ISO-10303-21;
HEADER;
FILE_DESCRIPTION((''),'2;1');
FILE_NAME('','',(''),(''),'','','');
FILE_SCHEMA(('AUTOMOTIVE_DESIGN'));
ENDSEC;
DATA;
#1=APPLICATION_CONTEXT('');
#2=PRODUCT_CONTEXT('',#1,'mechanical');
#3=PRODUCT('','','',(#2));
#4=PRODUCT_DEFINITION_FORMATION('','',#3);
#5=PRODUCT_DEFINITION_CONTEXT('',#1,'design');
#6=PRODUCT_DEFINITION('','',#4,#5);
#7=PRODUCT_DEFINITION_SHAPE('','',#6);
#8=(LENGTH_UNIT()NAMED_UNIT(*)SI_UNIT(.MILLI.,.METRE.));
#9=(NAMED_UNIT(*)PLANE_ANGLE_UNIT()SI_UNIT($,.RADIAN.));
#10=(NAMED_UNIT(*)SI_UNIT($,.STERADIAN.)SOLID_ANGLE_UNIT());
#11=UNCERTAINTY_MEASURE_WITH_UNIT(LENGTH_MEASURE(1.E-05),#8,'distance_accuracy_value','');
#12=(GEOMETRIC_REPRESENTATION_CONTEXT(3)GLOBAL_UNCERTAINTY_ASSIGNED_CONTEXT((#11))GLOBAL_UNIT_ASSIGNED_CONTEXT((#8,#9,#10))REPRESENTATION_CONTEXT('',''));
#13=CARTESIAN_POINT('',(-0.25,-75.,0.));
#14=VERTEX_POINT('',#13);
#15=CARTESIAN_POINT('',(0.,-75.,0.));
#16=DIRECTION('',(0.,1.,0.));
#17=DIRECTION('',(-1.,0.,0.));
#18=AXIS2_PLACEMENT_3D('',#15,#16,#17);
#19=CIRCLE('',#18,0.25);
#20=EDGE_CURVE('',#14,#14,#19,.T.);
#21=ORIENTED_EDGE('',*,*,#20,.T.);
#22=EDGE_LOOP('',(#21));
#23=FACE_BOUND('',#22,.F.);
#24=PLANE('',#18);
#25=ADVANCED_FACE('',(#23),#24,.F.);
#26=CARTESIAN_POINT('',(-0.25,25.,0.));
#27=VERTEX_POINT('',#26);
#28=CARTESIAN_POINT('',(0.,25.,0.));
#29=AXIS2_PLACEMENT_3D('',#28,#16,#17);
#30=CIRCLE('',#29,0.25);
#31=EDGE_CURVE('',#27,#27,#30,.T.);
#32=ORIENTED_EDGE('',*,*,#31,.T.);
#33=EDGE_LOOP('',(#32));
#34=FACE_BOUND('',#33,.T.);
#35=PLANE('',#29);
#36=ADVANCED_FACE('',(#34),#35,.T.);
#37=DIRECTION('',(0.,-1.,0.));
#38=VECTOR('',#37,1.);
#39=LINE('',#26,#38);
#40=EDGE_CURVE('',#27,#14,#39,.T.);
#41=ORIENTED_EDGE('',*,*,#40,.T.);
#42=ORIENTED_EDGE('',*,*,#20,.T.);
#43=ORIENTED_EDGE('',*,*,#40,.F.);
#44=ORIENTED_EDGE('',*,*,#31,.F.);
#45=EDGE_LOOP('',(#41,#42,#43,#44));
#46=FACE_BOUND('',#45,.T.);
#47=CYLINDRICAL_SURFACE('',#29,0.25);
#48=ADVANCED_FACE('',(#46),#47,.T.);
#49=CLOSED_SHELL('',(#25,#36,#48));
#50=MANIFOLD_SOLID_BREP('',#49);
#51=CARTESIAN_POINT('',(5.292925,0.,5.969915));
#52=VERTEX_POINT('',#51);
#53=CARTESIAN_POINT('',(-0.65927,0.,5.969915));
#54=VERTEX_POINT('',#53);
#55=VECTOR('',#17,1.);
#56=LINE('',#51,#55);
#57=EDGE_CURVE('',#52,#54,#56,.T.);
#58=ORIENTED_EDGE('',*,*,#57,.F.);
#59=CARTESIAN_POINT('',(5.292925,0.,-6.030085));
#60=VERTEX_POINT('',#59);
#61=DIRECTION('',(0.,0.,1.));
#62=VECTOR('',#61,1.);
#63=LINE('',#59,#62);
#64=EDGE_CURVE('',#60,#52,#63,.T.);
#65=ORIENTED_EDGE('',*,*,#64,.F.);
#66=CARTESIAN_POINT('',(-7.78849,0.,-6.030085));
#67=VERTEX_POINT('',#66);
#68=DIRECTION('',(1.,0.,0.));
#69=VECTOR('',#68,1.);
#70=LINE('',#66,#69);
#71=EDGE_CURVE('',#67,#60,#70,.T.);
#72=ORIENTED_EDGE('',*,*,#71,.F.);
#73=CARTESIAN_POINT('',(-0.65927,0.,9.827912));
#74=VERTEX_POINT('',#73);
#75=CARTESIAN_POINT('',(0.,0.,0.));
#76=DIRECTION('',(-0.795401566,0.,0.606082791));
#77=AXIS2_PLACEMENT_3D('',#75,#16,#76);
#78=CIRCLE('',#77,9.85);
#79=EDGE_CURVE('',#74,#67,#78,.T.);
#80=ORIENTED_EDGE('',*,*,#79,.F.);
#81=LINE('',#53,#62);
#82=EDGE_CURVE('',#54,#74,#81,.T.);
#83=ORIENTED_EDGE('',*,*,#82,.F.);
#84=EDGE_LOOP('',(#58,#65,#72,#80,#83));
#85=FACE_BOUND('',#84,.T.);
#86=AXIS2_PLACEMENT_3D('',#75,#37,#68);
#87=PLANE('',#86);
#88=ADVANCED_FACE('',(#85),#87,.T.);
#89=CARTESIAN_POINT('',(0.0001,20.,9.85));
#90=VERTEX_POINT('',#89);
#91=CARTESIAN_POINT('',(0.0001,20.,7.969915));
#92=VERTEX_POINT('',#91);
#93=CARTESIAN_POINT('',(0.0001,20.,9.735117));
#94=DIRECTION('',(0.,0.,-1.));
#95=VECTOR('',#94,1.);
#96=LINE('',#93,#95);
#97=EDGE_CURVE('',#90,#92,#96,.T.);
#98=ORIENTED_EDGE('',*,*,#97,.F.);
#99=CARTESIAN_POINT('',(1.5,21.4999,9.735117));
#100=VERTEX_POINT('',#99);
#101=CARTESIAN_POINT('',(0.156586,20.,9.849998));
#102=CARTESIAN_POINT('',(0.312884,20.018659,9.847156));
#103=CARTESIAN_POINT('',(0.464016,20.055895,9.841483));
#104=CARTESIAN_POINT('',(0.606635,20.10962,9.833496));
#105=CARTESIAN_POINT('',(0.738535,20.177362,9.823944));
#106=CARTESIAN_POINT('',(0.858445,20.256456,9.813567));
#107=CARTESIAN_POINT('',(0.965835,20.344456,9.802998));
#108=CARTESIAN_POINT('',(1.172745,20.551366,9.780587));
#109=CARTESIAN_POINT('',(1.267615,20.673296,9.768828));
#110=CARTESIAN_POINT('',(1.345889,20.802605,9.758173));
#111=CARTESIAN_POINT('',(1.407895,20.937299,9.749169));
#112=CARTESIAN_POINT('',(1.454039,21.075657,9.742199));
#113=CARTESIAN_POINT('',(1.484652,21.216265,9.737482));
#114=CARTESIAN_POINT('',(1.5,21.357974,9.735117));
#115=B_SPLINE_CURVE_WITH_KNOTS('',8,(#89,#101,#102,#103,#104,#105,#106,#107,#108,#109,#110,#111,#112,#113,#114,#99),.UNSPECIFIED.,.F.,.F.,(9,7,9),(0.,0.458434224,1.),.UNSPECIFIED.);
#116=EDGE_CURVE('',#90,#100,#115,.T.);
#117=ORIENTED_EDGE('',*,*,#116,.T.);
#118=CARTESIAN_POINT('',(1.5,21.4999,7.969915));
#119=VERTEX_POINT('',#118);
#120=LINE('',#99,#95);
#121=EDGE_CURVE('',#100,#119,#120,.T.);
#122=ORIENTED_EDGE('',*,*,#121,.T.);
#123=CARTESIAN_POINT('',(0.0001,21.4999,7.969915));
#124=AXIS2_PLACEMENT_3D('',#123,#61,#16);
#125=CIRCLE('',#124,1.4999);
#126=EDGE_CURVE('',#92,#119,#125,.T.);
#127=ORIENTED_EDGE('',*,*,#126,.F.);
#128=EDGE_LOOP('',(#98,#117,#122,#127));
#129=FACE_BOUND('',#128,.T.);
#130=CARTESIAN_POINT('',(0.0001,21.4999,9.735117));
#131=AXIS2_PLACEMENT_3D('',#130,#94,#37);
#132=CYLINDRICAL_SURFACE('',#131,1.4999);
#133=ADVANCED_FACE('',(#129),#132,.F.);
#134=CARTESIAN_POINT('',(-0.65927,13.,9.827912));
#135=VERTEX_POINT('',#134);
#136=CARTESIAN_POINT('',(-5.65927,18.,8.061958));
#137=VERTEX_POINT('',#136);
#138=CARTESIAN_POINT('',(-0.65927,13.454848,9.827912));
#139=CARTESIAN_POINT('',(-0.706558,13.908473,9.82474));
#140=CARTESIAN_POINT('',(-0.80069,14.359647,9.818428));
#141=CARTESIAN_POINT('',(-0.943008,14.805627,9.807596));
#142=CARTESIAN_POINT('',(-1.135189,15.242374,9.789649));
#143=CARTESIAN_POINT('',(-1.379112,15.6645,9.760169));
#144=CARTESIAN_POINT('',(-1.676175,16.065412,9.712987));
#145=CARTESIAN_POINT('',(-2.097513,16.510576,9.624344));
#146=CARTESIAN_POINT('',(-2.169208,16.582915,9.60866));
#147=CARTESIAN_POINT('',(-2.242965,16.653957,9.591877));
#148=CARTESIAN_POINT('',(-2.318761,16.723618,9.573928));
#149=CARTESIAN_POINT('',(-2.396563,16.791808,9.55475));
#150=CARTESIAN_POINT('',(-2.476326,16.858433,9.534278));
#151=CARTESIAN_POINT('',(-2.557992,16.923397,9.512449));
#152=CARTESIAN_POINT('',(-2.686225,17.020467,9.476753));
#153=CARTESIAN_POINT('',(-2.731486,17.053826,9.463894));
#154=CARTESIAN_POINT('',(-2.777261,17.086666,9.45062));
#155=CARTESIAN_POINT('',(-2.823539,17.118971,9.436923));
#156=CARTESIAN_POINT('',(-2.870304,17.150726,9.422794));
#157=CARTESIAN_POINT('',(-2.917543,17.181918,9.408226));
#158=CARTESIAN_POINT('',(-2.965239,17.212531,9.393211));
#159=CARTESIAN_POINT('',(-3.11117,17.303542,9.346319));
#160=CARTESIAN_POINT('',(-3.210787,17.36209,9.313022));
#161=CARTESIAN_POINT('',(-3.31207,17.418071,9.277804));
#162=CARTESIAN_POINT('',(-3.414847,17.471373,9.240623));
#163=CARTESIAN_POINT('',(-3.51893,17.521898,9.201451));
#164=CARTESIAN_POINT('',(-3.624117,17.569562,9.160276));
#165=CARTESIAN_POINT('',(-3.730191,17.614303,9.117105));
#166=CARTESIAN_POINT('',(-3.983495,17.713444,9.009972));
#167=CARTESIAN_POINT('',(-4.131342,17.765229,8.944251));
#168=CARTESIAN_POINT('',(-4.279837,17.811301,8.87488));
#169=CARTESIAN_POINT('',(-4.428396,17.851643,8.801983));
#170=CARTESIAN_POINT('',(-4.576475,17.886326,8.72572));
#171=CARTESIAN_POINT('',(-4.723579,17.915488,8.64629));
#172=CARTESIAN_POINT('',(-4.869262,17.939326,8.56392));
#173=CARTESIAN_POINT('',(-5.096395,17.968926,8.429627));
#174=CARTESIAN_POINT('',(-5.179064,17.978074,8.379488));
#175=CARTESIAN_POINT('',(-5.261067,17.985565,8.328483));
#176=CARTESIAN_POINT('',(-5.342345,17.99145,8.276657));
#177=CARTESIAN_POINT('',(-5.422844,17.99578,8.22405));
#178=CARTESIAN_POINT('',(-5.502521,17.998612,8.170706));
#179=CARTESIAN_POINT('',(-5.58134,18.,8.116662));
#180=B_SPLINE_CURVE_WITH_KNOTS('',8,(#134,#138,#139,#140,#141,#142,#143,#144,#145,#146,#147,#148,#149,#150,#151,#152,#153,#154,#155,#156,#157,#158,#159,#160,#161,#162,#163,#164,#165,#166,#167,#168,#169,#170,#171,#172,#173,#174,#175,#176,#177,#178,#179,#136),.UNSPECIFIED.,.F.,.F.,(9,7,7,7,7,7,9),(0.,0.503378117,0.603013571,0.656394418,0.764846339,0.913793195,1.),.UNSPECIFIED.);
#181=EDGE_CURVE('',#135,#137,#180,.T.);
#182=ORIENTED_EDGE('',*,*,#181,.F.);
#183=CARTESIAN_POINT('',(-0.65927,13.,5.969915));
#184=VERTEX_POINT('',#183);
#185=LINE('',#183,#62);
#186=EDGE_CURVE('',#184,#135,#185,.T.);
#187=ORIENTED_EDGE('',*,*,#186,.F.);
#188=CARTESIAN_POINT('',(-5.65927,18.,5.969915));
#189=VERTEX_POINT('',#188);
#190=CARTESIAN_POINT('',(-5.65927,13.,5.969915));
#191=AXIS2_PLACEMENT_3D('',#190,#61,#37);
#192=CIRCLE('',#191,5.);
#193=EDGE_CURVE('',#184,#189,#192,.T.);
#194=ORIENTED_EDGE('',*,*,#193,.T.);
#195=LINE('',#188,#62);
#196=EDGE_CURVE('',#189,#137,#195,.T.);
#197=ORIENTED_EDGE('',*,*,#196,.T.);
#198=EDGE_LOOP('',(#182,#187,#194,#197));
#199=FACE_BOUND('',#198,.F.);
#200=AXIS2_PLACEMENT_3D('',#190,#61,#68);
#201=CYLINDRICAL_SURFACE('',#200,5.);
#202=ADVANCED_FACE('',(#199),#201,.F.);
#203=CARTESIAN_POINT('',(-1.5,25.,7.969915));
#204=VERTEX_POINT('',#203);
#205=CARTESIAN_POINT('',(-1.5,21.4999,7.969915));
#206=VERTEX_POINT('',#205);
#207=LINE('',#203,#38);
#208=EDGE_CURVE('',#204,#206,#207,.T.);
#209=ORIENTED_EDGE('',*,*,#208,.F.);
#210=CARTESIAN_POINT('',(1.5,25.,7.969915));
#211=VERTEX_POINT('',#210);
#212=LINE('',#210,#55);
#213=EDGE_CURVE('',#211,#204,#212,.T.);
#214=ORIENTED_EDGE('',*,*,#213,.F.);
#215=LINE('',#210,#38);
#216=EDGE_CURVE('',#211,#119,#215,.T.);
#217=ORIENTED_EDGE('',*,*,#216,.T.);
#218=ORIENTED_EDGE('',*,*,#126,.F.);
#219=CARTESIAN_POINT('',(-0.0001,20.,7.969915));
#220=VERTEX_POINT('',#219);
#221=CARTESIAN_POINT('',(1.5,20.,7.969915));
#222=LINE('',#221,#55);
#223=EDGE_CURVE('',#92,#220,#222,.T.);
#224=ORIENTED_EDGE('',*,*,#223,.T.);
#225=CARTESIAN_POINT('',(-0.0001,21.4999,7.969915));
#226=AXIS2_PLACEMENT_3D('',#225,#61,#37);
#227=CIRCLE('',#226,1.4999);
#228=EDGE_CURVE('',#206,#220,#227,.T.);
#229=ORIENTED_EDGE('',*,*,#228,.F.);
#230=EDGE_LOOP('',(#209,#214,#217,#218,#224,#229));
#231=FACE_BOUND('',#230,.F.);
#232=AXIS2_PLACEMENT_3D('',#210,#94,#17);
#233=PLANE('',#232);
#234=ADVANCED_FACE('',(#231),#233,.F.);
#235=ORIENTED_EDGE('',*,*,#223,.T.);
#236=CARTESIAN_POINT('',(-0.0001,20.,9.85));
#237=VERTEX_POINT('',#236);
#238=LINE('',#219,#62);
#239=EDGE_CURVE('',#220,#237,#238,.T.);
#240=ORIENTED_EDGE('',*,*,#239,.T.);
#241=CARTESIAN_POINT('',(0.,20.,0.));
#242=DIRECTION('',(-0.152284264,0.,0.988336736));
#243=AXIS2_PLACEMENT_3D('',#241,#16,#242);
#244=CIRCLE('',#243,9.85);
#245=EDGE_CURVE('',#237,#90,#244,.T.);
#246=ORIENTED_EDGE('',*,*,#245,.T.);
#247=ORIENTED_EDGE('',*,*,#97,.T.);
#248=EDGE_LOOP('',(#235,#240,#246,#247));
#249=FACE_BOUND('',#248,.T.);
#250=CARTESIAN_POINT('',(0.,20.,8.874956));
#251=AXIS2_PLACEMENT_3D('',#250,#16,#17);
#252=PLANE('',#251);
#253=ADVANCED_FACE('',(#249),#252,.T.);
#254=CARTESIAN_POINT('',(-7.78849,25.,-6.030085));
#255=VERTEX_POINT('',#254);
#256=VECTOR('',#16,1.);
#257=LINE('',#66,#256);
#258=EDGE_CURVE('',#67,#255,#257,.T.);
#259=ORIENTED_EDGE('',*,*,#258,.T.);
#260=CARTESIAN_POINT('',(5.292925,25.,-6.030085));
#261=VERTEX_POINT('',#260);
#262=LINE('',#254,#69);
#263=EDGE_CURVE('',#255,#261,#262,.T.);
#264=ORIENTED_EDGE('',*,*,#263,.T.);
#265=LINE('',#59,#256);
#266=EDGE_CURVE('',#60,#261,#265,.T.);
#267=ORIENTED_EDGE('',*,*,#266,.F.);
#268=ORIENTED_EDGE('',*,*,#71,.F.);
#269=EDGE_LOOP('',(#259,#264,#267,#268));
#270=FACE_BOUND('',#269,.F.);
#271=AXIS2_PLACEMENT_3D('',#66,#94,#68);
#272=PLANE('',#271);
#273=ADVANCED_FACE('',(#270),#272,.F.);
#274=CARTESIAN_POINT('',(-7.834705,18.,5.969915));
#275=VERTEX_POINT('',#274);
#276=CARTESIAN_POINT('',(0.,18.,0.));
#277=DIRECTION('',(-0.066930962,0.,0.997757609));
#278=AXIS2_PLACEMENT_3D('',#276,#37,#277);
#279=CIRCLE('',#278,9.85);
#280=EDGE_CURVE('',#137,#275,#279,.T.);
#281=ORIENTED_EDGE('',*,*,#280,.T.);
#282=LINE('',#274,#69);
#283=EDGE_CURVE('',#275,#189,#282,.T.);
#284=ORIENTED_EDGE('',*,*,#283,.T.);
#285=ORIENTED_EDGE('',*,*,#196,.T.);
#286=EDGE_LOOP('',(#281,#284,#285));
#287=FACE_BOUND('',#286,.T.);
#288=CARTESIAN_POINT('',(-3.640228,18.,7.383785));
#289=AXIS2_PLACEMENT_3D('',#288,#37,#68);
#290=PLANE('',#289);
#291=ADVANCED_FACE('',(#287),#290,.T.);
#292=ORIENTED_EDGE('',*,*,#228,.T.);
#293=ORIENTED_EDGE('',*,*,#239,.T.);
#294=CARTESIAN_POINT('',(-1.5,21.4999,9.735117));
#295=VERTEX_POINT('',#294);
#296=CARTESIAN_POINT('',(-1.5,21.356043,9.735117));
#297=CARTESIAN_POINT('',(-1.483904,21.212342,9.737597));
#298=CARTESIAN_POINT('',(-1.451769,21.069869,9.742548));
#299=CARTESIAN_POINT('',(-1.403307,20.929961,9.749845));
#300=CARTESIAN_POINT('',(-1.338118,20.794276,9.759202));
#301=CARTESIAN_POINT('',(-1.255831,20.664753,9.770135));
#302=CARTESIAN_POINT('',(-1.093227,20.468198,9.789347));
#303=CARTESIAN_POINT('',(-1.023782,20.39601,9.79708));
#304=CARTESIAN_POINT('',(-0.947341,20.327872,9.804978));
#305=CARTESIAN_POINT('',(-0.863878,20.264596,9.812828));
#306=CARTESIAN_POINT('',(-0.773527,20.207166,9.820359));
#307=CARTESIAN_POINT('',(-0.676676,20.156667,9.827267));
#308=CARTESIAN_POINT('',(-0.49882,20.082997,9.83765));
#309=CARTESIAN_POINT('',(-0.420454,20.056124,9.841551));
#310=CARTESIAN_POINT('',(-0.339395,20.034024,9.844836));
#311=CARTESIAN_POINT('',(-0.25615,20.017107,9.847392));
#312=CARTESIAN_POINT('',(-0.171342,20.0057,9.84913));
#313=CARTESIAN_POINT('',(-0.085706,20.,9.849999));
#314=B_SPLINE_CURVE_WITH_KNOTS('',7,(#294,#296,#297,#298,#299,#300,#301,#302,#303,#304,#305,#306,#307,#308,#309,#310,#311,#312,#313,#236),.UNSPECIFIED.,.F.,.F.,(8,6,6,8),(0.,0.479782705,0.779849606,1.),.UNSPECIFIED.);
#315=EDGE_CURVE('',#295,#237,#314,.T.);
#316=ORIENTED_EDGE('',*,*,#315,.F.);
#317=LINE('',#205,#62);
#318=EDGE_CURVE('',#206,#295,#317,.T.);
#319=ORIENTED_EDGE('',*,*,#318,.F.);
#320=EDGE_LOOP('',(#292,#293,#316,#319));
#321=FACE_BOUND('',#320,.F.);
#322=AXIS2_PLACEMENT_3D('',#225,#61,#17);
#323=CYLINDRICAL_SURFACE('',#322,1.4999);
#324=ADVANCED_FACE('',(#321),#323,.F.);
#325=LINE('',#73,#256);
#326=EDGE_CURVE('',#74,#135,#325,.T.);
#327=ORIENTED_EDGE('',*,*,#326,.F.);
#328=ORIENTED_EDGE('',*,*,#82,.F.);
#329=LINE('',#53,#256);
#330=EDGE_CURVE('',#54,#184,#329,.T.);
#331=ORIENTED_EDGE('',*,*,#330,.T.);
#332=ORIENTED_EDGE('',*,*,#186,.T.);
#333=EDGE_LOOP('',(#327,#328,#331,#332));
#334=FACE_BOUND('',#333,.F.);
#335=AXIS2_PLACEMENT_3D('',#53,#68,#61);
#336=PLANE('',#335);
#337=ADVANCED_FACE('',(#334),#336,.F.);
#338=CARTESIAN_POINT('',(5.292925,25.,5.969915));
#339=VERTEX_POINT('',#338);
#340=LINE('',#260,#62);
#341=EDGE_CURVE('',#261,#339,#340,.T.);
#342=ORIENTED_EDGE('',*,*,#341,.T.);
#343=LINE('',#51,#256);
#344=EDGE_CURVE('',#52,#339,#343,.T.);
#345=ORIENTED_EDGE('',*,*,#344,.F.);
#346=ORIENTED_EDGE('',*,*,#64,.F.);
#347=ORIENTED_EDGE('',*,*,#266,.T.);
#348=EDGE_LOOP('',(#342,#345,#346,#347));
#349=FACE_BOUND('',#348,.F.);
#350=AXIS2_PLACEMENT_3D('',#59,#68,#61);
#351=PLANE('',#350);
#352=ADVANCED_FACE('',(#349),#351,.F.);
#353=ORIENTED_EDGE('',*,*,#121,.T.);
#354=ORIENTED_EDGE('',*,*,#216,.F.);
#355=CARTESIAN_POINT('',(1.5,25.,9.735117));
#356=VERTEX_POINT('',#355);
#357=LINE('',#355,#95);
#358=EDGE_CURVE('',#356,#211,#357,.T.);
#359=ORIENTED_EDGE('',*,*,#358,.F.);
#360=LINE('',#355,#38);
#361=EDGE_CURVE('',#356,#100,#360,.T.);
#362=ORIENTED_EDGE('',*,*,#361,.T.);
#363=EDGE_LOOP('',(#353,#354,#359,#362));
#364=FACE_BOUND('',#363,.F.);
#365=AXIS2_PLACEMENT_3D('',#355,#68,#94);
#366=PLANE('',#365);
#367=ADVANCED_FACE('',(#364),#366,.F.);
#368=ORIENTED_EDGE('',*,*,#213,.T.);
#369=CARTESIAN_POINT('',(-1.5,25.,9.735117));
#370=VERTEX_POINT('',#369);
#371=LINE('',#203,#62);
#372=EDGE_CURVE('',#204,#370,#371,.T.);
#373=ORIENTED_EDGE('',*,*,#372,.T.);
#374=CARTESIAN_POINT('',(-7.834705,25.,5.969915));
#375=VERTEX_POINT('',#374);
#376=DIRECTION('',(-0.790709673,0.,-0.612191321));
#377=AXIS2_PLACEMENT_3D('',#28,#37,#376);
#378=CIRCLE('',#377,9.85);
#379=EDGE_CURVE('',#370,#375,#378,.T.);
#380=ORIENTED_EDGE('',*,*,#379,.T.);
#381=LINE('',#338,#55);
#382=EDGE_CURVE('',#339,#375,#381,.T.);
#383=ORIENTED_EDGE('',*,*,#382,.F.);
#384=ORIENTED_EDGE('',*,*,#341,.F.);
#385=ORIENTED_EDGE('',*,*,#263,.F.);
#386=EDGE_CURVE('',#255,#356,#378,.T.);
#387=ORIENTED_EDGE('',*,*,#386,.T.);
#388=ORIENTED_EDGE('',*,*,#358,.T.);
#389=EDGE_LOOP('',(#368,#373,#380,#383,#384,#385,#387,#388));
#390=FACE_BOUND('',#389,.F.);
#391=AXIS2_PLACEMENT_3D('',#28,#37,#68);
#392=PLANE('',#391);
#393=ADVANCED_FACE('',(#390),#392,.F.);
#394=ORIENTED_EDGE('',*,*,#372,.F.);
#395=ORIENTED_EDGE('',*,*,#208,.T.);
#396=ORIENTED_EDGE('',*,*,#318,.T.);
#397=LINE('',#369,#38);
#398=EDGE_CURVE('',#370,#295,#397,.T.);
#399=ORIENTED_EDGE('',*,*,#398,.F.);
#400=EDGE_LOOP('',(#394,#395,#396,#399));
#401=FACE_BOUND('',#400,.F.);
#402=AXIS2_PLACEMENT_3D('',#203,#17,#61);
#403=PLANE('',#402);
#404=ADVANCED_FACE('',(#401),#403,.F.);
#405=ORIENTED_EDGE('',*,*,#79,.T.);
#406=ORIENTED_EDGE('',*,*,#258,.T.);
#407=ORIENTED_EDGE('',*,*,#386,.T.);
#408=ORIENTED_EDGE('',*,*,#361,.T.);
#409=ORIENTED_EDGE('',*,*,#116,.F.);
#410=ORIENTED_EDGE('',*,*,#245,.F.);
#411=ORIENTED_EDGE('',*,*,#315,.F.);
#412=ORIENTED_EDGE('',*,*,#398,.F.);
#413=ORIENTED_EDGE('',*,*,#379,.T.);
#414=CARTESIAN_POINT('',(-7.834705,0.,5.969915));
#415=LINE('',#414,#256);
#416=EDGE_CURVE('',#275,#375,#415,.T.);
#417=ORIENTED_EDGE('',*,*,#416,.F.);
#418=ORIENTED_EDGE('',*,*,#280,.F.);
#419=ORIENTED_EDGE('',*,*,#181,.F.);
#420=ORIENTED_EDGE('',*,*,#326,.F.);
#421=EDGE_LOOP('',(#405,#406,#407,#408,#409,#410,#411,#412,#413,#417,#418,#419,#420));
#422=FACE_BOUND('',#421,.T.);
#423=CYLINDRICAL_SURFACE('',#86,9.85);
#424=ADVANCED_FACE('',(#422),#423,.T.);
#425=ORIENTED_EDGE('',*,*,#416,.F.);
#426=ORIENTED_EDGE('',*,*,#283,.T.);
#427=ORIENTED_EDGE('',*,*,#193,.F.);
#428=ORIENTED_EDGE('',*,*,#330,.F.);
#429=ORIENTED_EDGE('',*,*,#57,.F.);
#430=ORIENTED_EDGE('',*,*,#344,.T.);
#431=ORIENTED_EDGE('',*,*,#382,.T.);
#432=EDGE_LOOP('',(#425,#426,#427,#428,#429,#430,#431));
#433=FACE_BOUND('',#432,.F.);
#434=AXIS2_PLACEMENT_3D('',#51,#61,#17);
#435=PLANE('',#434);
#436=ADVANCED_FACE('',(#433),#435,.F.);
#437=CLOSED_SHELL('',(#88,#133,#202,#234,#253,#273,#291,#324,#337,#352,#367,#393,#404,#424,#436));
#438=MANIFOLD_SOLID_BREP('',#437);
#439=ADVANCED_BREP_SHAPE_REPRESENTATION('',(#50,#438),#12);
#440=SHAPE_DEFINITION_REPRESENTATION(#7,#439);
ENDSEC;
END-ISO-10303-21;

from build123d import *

# Parameters (mm, degrees)
F0_R      = 9.85
F1_DEPTH  = 25
F3_DEPTH  = 25
F5_DEPTH  = 5
F6_R      = 1.4999
F8_DEPTH  = 18
F9_R      = 5
F10_R     = 0.25
F11_DEPTH = 100


# Not quite as in the source:
# - a fillet or chamfer is up to 0.001 mm smaller than in the source, because OpenCascade refuses the exact size


with BuildPart() as f1:
    # F0 (on Front) → F1 (new body)
    with BuildSketch(Plane.XZ):
        Circle(F0_R)
    extrude(amount=-F1_DEPTH)

    # F2 (on face) → F3 (cut)
    with BuildSketch(Plane.XZ):
        with BuildLine():
            Line((5.2929249124, 5.9699154869), (-7.8347054239, 5.9699154869))
            ThreePointArc((-7.8347054239, 5.9699154869), (-9.8499269521, -0.0379346534), (-7.788490275, -6.0300845131))
            Line((-7.788490275, -6.0300845131), (5.2929249124, -6.0300845131))
            Line((5.2929249124, -6.0300845131), (5.2929249124, 5.9699154869))
        make_face()
    extrude(amount=-F3_DEPTH, mode=Mode.SUBTRACT)

    # F4 (on face) → F5 (cut)
    with BuildSketch(Plane(origin=(0, 25, 0), x_dir=(-1, 0, 0), z_dir=(0, 1, 0))):
        with BuildLine():
            ThreePointArc((1.5, 9.7351168457), (0, 9.85), (-1.5, 9.7351168457))
            Line((-1.5, 9.7351168457), (-1.5, 7.9699154869))
            Line((-1.5, 7.9699154869), (1.5, 7.9699154869))
            Line((1.5, 7.9699154869), (1.5, 9.7351168457))
        make_face()
    extrude(amount=-F5_DEPTH, mode=Mode.SUBTRACT)

    # F6 (radius 1.5 in the source; OpenCascade refuses exactly that, so slightly less here)
    f6_edges = [f1.edges().sort_by_distance(p)[0] for p in [
        (-1.5, 20, 8.852516),
        (1.5, 20, 8.852516),
    ]]
    fillet(f6_edges, radius=F6_R)

    # F7 (on face) → F8 (cut)
    with BuildSketch(Plane.XZ):
        with BuildLine():
            Line((-0.6592699745, 5.9699154869), (-0.6592699745, 9.8279124488))
            ThreePointArc((-0.6592699745, 9.8279124488), (-4.6645406694, 8.6755149901), (-7.8347054239, 5.9699154869))
            Line((-7.8347054239, 5.9699154869), (-0.6592699745, 5.9699154869))
        make_face()
    extrude(amount=-F8_DEPTH, mode=Mode.SUBTRACT)

    # F9
    f9_edges = [f1.edges().sort_by_distance(p)[0] for p in [
        (-0.65927, 18, 7.898914),
    ]]
    fillet(f9_edges, radius=F9_R)


with BuildPart() as f11:
    # F10 (on face) → F11 (new body)
    with BuildSketch(Plane(origin=(0, 25, 0), x_dir=(-1, 0, 0), z_dir=(0, 1, 0))):
        Circle(F10_R)
    extrude(amount=-F11_DEPTH)


solid = Compound([f1.part, f11.part])
